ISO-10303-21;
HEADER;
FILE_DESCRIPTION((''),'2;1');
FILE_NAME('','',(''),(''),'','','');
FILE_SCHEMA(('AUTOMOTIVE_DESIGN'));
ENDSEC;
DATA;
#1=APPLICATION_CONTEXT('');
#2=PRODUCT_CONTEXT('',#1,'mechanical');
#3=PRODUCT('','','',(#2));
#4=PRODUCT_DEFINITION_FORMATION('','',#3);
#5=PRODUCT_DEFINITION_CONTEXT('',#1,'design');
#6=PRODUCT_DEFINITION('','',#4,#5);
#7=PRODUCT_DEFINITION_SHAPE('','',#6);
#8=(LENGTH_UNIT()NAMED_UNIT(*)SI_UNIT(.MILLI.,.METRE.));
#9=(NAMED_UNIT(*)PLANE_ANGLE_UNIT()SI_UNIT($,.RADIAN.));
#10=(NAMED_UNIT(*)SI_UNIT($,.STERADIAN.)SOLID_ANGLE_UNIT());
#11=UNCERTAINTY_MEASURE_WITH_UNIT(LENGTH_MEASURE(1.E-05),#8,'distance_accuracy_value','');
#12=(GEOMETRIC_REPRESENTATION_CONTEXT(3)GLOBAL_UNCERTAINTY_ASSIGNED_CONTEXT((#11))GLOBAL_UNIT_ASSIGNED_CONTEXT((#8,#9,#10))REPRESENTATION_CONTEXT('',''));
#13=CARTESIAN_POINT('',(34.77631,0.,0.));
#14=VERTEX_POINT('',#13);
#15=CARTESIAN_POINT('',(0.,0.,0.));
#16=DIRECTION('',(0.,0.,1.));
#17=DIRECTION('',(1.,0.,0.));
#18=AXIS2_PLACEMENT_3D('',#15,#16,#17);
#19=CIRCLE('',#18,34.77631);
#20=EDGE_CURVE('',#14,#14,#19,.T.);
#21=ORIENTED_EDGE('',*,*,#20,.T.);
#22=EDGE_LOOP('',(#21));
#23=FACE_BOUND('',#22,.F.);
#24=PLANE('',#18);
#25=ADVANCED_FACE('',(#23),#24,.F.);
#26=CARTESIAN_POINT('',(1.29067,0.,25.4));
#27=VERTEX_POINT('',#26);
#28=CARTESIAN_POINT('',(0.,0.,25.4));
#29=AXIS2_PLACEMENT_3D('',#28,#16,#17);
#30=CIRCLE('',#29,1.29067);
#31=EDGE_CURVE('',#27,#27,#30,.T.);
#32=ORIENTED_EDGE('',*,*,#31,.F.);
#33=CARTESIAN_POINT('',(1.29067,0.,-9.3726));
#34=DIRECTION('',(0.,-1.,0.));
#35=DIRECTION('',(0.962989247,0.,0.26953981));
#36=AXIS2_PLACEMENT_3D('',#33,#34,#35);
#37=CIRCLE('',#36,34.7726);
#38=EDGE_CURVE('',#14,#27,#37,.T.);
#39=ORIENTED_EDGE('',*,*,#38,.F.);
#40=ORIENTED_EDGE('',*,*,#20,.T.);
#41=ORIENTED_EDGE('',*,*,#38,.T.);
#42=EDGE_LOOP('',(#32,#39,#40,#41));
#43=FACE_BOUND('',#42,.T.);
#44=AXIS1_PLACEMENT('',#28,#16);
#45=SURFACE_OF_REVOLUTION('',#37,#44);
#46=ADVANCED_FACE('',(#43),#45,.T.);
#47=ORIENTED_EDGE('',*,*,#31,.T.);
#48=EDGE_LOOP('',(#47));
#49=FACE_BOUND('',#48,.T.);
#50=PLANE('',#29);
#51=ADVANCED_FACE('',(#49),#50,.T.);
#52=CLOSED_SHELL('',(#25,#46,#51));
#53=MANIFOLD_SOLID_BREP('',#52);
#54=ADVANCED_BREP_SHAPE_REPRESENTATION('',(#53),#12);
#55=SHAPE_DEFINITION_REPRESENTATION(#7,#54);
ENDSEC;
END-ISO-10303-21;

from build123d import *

# Parameters (mm, degrees)
F0_R     = 34.7763099746
F1_DEPTH = 25.4


# Not quite as in the source:
# - a fillet or chamfer that OpenCascade refuses, or shapes differently, is made with other operations: its cross-section is extruded or revolved along the edge and cut away or added


with BuildPart() as f1:
    # F0 (on Top) → F1 (new body)
    with BuildSketch(Plane.XY):
        Circle(F0_R)
    extrude(amount=F1_DEPTH)

    # F2: fillet of radius 34.7726 on 1 edges, made by hand

    # F2_s1 → F2_t2 (revolve, cut)
    with BuildSketch(Plane.XZ):
        with BuildLine():
            ThreePointArc((34.7763099746, 0), (22.3052369198, 18.331581828), (1.2906700673, 25.4))
            Line((1.2906700673, 25.4), (34.7763099746, 25.4))
            Line((34.7763099746, 25.4), (34.7763099746, 0))
        make_face()
    revolve(axis=Axis((0, 0, 25.4), (0, 0, 1)), mode=Mode.SUBTRACT)


solid = f1.part
